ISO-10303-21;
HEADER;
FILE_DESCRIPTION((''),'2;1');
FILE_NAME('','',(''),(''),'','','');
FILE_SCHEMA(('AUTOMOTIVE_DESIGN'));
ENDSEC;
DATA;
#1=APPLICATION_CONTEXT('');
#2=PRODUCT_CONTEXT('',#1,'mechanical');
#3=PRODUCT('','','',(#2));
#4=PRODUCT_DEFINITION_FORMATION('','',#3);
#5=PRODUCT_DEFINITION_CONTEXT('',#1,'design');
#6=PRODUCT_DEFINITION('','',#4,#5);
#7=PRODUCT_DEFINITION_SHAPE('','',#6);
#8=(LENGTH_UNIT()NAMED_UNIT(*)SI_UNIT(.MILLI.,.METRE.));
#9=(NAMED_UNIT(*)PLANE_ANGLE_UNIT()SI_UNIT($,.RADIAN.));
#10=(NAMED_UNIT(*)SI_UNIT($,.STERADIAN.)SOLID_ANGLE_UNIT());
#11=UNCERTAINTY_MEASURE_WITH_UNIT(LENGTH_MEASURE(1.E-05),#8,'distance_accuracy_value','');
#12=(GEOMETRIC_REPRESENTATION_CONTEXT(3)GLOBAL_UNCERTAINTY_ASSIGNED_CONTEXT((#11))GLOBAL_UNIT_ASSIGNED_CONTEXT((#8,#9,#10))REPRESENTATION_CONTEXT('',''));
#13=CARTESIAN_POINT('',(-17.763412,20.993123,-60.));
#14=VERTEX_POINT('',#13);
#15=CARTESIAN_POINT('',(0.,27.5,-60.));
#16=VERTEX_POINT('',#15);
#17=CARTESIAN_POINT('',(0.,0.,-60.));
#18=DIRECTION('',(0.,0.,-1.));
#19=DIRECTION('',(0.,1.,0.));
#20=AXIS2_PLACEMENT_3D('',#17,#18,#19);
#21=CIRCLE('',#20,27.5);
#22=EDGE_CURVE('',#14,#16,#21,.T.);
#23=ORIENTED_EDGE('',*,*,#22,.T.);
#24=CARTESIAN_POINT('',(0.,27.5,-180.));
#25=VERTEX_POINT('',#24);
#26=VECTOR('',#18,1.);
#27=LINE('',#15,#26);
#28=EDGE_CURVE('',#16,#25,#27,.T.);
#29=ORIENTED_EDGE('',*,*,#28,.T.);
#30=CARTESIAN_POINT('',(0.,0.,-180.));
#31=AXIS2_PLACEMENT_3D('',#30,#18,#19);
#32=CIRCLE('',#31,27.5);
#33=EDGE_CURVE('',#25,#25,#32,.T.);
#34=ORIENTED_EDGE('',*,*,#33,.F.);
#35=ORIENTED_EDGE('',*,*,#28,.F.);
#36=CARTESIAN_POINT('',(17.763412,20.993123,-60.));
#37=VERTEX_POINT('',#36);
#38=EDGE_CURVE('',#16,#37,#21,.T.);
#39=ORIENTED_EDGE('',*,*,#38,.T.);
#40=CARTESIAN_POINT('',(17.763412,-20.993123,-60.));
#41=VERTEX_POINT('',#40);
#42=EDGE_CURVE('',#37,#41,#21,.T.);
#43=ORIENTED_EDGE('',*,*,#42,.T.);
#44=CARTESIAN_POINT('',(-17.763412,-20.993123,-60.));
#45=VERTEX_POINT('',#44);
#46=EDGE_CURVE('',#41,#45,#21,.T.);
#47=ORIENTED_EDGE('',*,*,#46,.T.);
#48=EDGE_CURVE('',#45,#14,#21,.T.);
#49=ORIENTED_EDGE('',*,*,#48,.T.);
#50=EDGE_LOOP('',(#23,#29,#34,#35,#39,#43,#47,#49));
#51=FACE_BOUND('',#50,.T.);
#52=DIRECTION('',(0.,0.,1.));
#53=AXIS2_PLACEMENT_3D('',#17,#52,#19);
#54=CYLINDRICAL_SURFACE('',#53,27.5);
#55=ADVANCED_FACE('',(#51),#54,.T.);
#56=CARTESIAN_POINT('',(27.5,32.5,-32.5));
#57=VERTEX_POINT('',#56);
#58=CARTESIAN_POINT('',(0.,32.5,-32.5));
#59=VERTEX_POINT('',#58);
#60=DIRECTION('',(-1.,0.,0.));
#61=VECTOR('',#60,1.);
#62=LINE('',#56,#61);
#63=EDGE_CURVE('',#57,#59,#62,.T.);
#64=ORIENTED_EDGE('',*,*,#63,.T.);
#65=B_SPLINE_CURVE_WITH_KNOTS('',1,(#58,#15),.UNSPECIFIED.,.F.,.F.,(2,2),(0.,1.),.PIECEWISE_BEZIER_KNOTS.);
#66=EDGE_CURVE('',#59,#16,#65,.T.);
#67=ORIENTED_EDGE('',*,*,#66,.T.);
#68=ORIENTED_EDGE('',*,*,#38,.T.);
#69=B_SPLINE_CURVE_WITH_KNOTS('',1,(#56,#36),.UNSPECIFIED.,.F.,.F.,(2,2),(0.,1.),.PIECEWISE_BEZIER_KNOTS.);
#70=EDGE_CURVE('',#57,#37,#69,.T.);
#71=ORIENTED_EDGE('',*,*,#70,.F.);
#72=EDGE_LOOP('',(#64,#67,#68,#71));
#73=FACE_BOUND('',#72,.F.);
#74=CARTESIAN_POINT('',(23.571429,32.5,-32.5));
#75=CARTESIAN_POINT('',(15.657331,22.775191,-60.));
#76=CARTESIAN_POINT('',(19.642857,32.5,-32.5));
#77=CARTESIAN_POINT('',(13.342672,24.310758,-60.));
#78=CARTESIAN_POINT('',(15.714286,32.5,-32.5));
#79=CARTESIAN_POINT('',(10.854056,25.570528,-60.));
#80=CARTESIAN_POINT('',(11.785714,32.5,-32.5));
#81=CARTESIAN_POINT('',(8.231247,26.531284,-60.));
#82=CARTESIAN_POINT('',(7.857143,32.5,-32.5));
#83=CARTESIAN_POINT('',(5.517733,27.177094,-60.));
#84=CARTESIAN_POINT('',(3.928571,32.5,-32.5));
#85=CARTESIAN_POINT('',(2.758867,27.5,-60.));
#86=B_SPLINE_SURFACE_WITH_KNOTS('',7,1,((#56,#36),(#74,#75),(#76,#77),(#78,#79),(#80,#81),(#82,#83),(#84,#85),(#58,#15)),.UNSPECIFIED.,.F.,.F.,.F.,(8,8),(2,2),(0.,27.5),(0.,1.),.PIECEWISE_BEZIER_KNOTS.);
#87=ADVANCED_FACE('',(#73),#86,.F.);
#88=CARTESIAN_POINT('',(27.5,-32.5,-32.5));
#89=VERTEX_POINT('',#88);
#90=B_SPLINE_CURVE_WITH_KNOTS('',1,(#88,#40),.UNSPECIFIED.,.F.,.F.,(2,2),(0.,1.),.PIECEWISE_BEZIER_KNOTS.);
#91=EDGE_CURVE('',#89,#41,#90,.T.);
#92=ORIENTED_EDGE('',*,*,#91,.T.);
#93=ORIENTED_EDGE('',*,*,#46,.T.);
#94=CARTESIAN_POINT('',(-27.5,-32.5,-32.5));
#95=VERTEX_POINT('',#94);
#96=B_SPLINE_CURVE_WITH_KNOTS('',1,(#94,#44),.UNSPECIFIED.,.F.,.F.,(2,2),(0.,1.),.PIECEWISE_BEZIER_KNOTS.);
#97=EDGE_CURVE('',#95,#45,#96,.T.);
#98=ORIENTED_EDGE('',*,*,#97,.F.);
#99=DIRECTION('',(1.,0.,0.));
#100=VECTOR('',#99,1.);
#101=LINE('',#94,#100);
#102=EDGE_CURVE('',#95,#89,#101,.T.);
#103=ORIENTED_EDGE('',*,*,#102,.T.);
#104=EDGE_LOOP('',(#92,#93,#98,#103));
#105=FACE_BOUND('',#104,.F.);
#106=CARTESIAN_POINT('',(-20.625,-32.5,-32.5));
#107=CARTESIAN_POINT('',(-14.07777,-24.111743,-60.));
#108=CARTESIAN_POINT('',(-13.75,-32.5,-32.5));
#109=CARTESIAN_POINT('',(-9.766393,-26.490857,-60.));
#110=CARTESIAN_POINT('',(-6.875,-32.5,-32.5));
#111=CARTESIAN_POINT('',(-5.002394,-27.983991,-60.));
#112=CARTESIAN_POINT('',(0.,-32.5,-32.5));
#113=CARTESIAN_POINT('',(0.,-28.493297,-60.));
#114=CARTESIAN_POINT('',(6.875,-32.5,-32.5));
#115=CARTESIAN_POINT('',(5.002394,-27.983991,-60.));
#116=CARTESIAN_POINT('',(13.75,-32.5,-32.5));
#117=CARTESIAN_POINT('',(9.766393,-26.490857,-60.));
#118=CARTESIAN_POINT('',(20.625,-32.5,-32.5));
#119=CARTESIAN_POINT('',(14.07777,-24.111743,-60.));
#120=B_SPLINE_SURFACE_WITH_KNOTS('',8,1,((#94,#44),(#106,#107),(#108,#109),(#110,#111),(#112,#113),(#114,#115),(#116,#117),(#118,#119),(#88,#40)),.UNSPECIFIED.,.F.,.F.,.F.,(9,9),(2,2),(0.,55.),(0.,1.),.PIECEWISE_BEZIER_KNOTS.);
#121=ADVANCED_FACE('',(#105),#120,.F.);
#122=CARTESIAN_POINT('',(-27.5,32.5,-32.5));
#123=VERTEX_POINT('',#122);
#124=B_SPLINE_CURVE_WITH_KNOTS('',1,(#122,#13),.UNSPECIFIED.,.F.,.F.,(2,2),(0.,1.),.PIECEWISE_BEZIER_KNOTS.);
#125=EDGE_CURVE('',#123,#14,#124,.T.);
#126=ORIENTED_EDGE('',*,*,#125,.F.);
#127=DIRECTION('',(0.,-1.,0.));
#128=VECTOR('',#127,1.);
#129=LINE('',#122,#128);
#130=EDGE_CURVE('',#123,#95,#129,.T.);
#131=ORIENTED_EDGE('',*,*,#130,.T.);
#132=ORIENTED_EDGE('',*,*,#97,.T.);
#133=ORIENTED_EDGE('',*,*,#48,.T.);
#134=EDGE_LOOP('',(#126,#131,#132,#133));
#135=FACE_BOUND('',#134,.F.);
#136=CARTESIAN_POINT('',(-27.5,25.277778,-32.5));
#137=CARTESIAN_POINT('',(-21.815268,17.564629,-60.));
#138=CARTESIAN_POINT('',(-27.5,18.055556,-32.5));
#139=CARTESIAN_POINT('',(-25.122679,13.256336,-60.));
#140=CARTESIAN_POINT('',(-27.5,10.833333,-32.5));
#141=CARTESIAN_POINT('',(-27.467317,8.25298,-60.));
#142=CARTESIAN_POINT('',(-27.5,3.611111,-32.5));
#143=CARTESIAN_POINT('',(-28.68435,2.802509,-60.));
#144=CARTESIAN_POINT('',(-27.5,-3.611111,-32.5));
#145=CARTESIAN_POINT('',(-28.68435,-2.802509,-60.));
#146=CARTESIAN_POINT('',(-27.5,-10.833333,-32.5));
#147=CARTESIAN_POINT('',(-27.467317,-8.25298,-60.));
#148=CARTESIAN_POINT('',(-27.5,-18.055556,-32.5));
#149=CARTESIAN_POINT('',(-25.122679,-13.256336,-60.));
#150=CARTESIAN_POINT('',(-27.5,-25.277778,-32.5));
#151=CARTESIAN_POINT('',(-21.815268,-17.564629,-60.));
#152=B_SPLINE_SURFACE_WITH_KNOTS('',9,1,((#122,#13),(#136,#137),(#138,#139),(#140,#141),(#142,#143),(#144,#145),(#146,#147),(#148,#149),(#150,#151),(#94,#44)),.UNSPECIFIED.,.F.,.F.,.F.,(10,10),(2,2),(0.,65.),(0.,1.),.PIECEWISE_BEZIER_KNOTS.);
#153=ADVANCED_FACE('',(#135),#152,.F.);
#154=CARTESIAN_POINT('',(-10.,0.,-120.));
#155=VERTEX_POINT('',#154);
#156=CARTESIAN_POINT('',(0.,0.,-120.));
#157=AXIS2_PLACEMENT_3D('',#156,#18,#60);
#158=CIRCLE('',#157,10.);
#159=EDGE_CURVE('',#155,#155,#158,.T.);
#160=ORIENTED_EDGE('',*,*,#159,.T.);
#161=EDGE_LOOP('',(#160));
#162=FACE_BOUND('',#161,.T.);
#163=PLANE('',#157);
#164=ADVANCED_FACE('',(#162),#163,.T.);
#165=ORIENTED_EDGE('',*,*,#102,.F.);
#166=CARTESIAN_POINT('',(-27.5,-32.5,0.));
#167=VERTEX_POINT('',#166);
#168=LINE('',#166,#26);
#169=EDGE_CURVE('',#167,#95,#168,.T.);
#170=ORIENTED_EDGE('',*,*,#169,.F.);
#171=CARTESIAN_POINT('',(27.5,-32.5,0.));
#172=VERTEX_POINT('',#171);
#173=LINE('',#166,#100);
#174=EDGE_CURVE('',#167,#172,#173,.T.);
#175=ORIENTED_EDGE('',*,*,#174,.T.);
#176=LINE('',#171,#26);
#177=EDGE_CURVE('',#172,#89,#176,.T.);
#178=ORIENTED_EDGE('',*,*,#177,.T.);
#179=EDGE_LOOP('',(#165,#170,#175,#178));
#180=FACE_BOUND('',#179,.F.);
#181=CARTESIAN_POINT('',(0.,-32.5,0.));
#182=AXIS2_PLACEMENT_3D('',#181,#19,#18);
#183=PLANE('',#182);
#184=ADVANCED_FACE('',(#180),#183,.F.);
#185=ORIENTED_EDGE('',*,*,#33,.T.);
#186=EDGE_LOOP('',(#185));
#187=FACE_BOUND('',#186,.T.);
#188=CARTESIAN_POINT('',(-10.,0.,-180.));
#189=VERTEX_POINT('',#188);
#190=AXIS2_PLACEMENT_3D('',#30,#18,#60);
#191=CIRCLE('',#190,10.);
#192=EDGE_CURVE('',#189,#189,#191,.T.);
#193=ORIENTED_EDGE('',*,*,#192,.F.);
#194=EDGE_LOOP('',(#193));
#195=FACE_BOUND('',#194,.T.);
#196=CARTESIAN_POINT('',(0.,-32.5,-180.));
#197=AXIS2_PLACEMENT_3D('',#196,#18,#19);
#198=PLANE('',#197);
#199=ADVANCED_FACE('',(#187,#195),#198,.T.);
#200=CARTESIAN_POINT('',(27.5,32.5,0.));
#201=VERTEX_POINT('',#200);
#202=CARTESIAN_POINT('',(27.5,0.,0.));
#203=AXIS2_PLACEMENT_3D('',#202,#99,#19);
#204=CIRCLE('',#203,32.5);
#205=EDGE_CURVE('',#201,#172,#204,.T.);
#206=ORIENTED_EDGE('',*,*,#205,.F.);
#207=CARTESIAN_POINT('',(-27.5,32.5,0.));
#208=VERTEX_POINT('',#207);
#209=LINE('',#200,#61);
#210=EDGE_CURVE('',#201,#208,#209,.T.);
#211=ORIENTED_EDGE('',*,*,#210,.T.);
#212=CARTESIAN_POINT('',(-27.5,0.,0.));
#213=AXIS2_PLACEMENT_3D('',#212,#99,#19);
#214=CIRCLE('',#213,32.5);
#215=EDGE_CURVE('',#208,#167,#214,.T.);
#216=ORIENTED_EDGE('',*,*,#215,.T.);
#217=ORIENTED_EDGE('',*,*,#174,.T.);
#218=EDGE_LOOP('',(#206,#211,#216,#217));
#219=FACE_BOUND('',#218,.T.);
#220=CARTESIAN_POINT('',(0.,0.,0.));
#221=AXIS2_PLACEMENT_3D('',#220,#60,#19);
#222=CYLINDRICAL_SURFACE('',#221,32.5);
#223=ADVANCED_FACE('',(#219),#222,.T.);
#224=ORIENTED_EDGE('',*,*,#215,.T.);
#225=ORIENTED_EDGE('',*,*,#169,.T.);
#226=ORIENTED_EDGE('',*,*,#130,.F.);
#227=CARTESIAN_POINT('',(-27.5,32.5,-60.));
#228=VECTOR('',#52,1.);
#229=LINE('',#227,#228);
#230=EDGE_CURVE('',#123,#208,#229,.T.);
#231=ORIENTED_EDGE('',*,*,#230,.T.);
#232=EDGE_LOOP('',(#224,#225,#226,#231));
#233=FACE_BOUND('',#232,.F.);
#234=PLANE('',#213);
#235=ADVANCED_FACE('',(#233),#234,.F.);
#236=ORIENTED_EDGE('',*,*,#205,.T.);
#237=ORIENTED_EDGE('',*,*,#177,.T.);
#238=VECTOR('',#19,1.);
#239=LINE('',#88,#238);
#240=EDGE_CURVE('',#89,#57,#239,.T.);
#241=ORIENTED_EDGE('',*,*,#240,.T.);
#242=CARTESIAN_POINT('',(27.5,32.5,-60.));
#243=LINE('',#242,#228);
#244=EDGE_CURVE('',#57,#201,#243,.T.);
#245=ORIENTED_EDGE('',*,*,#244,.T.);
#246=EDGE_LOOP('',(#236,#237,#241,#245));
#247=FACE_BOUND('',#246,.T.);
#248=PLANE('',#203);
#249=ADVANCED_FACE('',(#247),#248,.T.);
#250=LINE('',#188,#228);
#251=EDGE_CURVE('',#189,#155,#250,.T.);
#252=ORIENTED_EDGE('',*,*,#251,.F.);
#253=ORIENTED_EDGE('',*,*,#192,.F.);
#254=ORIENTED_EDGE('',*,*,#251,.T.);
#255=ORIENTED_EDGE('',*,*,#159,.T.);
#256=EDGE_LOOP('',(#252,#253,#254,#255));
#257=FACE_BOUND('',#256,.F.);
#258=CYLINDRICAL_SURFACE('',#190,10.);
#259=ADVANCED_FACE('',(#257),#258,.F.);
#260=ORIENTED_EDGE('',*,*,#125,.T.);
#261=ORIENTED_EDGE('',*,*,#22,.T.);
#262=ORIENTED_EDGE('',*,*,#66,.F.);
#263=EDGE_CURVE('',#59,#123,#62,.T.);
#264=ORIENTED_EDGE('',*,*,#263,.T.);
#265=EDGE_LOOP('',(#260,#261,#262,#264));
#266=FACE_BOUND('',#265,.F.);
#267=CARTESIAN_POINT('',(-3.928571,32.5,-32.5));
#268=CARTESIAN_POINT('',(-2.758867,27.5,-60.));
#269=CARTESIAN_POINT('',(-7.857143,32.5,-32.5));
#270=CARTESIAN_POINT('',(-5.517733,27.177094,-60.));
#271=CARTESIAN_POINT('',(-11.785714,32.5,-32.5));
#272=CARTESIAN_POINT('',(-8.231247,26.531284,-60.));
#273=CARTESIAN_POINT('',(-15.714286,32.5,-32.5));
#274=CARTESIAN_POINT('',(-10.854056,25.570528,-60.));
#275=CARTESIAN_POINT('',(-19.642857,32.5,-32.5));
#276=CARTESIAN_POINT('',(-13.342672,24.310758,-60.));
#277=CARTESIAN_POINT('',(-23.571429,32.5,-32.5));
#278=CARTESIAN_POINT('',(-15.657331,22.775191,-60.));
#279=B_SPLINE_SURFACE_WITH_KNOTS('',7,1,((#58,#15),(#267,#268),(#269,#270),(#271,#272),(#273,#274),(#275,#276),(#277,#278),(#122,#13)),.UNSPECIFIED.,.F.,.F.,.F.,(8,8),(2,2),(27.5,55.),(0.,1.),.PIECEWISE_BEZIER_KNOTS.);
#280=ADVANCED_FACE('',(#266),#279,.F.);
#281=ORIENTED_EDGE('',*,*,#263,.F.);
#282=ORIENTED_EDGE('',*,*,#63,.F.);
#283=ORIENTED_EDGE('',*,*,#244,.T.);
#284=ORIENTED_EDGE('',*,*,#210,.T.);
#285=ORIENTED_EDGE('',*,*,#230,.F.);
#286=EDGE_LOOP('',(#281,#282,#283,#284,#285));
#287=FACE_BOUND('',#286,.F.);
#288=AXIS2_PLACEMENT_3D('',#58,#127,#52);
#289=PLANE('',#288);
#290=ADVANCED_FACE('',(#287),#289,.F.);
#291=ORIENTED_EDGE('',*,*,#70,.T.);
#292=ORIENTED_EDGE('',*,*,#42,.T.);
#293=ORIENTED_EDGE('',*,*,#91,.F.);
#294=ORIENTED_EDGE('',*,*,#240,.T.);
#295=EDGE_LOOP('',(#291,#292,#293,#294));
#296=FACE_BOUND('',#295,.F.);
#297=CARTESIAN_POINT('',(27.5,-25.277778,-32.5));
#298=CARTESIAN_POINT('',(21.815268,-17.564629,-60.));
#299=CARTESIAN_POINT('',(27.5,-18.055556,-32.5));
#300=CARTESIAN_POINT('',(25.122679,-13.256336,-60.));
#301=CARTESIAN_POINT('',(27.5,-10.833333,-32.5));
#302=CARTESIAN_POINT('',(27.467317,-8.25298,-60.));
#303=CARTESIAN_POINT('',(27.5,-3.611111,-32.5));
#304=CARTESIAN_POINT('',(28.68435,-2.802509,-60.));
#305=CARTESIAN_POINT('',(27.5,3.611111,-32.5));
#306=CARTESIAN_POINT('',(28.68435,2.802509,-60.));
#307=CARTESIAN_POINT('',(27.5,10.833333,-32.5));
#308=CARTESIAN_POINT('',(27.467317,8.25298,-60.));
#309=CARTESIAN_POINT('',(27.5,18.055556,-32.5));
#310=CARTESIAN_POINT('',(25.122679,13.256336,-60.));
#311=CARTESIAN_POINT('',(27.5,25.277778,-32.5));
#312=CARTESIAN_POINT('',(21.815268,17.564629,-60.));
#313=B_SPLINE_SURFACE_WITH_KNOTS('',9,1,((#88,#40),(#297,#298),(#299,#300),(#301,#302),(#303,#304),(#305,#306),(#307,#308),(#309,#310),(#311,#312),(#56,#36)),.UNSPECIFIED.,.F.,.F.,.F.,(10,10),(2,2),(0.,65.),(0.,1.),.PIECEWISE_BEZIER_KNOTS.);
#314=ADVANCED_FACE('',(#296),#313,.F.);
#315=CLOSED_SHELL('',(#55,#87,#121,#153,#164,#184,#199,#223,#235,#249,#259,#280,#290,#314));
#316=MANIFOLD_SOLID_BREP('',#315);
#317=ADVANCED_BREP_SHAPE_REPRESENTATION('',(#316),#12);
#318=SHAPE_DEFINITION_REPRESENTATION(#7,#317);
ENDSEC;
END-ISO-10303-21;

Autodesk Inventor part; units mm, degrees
sketch "Sketch6" plane through (0, 0, 0) normal (1, 0, 0) x (0, 1, 0)
  circle A0 centre (0, 0) radius 32.5
  line L0 (-32.5, 0) -> (-32.5, -60)
  line L1 (-32.5, -60) -> (32.5, -60)
  line L2 (32.5, -60) -> (32.5, 0)
  line L3 (0, 0) -> (0, -60) construction
  line L4 (-32.5, -32.5) -> (32.5, -32.5)
  dimension "d38" = 65
  dimension "d39" = 60
extrude "Extrusion8" add sketch "Sketch6" along normal mid plane 55 contours A0 | L2 L4 A0 | A0 L4 L0
ref_plane "Work Plane2" through (0, -32.5, -60) normal (0, 0, -1) x (0, 1, 0)
ref_plane "Work Plane1" through (0, 0, 27.5) normal (0, 0, 1) x (1, 0, 0)
sketch "Sketch3" plane through (0, -32.5, -60) normal (0, 0, -1) x (0, 1, 0)
  circle A0 centre (32.5, 0) radius 27.5
  line L0 (65, -27.5) -> (65, 27.5) projected
  circle A1 centre (32.5, 0) radius 37.5
  dimension "d48" = 10
  dimension "d73" = 55
loft "Loft1" add profiles "Sketch3" section 1 edges at (0, 32.5, -32.5) (27.5, 0, -32.5) (0, -32.5, -32.5) (-27.5, 0, -32.5) contours A0
sketch "Sketch7" plane through (0, 0, 0) normal (1, 0, 0) x (0, 1, 0)
  line L0 (20.9931, -60) -> (-20.9931, -60) projected
  line L1 (0, -60) -> (0, -180)
  point P0 (0, 0)
  dimension "d52" = 120
ref_plane "Work Plane3" through (0, 0, -180) normal (0, 0, -1) x (-1, 0, 0)
extrude "Extrusion1" add sketch "Sketch3" along normal blind 120 contours A0
sketch "Sketch5" plane through (0, 0, -180) normal (0, 0, -1) x (-1, 0, 0)
  circle A0 centre (0, 0) radius 10
  point P0 (0, 0)
  dimension "d35" = 20
extrude "Extrusion7" cut sketch "Sketch5" against normal blind 60
properties part number "shank_2"
